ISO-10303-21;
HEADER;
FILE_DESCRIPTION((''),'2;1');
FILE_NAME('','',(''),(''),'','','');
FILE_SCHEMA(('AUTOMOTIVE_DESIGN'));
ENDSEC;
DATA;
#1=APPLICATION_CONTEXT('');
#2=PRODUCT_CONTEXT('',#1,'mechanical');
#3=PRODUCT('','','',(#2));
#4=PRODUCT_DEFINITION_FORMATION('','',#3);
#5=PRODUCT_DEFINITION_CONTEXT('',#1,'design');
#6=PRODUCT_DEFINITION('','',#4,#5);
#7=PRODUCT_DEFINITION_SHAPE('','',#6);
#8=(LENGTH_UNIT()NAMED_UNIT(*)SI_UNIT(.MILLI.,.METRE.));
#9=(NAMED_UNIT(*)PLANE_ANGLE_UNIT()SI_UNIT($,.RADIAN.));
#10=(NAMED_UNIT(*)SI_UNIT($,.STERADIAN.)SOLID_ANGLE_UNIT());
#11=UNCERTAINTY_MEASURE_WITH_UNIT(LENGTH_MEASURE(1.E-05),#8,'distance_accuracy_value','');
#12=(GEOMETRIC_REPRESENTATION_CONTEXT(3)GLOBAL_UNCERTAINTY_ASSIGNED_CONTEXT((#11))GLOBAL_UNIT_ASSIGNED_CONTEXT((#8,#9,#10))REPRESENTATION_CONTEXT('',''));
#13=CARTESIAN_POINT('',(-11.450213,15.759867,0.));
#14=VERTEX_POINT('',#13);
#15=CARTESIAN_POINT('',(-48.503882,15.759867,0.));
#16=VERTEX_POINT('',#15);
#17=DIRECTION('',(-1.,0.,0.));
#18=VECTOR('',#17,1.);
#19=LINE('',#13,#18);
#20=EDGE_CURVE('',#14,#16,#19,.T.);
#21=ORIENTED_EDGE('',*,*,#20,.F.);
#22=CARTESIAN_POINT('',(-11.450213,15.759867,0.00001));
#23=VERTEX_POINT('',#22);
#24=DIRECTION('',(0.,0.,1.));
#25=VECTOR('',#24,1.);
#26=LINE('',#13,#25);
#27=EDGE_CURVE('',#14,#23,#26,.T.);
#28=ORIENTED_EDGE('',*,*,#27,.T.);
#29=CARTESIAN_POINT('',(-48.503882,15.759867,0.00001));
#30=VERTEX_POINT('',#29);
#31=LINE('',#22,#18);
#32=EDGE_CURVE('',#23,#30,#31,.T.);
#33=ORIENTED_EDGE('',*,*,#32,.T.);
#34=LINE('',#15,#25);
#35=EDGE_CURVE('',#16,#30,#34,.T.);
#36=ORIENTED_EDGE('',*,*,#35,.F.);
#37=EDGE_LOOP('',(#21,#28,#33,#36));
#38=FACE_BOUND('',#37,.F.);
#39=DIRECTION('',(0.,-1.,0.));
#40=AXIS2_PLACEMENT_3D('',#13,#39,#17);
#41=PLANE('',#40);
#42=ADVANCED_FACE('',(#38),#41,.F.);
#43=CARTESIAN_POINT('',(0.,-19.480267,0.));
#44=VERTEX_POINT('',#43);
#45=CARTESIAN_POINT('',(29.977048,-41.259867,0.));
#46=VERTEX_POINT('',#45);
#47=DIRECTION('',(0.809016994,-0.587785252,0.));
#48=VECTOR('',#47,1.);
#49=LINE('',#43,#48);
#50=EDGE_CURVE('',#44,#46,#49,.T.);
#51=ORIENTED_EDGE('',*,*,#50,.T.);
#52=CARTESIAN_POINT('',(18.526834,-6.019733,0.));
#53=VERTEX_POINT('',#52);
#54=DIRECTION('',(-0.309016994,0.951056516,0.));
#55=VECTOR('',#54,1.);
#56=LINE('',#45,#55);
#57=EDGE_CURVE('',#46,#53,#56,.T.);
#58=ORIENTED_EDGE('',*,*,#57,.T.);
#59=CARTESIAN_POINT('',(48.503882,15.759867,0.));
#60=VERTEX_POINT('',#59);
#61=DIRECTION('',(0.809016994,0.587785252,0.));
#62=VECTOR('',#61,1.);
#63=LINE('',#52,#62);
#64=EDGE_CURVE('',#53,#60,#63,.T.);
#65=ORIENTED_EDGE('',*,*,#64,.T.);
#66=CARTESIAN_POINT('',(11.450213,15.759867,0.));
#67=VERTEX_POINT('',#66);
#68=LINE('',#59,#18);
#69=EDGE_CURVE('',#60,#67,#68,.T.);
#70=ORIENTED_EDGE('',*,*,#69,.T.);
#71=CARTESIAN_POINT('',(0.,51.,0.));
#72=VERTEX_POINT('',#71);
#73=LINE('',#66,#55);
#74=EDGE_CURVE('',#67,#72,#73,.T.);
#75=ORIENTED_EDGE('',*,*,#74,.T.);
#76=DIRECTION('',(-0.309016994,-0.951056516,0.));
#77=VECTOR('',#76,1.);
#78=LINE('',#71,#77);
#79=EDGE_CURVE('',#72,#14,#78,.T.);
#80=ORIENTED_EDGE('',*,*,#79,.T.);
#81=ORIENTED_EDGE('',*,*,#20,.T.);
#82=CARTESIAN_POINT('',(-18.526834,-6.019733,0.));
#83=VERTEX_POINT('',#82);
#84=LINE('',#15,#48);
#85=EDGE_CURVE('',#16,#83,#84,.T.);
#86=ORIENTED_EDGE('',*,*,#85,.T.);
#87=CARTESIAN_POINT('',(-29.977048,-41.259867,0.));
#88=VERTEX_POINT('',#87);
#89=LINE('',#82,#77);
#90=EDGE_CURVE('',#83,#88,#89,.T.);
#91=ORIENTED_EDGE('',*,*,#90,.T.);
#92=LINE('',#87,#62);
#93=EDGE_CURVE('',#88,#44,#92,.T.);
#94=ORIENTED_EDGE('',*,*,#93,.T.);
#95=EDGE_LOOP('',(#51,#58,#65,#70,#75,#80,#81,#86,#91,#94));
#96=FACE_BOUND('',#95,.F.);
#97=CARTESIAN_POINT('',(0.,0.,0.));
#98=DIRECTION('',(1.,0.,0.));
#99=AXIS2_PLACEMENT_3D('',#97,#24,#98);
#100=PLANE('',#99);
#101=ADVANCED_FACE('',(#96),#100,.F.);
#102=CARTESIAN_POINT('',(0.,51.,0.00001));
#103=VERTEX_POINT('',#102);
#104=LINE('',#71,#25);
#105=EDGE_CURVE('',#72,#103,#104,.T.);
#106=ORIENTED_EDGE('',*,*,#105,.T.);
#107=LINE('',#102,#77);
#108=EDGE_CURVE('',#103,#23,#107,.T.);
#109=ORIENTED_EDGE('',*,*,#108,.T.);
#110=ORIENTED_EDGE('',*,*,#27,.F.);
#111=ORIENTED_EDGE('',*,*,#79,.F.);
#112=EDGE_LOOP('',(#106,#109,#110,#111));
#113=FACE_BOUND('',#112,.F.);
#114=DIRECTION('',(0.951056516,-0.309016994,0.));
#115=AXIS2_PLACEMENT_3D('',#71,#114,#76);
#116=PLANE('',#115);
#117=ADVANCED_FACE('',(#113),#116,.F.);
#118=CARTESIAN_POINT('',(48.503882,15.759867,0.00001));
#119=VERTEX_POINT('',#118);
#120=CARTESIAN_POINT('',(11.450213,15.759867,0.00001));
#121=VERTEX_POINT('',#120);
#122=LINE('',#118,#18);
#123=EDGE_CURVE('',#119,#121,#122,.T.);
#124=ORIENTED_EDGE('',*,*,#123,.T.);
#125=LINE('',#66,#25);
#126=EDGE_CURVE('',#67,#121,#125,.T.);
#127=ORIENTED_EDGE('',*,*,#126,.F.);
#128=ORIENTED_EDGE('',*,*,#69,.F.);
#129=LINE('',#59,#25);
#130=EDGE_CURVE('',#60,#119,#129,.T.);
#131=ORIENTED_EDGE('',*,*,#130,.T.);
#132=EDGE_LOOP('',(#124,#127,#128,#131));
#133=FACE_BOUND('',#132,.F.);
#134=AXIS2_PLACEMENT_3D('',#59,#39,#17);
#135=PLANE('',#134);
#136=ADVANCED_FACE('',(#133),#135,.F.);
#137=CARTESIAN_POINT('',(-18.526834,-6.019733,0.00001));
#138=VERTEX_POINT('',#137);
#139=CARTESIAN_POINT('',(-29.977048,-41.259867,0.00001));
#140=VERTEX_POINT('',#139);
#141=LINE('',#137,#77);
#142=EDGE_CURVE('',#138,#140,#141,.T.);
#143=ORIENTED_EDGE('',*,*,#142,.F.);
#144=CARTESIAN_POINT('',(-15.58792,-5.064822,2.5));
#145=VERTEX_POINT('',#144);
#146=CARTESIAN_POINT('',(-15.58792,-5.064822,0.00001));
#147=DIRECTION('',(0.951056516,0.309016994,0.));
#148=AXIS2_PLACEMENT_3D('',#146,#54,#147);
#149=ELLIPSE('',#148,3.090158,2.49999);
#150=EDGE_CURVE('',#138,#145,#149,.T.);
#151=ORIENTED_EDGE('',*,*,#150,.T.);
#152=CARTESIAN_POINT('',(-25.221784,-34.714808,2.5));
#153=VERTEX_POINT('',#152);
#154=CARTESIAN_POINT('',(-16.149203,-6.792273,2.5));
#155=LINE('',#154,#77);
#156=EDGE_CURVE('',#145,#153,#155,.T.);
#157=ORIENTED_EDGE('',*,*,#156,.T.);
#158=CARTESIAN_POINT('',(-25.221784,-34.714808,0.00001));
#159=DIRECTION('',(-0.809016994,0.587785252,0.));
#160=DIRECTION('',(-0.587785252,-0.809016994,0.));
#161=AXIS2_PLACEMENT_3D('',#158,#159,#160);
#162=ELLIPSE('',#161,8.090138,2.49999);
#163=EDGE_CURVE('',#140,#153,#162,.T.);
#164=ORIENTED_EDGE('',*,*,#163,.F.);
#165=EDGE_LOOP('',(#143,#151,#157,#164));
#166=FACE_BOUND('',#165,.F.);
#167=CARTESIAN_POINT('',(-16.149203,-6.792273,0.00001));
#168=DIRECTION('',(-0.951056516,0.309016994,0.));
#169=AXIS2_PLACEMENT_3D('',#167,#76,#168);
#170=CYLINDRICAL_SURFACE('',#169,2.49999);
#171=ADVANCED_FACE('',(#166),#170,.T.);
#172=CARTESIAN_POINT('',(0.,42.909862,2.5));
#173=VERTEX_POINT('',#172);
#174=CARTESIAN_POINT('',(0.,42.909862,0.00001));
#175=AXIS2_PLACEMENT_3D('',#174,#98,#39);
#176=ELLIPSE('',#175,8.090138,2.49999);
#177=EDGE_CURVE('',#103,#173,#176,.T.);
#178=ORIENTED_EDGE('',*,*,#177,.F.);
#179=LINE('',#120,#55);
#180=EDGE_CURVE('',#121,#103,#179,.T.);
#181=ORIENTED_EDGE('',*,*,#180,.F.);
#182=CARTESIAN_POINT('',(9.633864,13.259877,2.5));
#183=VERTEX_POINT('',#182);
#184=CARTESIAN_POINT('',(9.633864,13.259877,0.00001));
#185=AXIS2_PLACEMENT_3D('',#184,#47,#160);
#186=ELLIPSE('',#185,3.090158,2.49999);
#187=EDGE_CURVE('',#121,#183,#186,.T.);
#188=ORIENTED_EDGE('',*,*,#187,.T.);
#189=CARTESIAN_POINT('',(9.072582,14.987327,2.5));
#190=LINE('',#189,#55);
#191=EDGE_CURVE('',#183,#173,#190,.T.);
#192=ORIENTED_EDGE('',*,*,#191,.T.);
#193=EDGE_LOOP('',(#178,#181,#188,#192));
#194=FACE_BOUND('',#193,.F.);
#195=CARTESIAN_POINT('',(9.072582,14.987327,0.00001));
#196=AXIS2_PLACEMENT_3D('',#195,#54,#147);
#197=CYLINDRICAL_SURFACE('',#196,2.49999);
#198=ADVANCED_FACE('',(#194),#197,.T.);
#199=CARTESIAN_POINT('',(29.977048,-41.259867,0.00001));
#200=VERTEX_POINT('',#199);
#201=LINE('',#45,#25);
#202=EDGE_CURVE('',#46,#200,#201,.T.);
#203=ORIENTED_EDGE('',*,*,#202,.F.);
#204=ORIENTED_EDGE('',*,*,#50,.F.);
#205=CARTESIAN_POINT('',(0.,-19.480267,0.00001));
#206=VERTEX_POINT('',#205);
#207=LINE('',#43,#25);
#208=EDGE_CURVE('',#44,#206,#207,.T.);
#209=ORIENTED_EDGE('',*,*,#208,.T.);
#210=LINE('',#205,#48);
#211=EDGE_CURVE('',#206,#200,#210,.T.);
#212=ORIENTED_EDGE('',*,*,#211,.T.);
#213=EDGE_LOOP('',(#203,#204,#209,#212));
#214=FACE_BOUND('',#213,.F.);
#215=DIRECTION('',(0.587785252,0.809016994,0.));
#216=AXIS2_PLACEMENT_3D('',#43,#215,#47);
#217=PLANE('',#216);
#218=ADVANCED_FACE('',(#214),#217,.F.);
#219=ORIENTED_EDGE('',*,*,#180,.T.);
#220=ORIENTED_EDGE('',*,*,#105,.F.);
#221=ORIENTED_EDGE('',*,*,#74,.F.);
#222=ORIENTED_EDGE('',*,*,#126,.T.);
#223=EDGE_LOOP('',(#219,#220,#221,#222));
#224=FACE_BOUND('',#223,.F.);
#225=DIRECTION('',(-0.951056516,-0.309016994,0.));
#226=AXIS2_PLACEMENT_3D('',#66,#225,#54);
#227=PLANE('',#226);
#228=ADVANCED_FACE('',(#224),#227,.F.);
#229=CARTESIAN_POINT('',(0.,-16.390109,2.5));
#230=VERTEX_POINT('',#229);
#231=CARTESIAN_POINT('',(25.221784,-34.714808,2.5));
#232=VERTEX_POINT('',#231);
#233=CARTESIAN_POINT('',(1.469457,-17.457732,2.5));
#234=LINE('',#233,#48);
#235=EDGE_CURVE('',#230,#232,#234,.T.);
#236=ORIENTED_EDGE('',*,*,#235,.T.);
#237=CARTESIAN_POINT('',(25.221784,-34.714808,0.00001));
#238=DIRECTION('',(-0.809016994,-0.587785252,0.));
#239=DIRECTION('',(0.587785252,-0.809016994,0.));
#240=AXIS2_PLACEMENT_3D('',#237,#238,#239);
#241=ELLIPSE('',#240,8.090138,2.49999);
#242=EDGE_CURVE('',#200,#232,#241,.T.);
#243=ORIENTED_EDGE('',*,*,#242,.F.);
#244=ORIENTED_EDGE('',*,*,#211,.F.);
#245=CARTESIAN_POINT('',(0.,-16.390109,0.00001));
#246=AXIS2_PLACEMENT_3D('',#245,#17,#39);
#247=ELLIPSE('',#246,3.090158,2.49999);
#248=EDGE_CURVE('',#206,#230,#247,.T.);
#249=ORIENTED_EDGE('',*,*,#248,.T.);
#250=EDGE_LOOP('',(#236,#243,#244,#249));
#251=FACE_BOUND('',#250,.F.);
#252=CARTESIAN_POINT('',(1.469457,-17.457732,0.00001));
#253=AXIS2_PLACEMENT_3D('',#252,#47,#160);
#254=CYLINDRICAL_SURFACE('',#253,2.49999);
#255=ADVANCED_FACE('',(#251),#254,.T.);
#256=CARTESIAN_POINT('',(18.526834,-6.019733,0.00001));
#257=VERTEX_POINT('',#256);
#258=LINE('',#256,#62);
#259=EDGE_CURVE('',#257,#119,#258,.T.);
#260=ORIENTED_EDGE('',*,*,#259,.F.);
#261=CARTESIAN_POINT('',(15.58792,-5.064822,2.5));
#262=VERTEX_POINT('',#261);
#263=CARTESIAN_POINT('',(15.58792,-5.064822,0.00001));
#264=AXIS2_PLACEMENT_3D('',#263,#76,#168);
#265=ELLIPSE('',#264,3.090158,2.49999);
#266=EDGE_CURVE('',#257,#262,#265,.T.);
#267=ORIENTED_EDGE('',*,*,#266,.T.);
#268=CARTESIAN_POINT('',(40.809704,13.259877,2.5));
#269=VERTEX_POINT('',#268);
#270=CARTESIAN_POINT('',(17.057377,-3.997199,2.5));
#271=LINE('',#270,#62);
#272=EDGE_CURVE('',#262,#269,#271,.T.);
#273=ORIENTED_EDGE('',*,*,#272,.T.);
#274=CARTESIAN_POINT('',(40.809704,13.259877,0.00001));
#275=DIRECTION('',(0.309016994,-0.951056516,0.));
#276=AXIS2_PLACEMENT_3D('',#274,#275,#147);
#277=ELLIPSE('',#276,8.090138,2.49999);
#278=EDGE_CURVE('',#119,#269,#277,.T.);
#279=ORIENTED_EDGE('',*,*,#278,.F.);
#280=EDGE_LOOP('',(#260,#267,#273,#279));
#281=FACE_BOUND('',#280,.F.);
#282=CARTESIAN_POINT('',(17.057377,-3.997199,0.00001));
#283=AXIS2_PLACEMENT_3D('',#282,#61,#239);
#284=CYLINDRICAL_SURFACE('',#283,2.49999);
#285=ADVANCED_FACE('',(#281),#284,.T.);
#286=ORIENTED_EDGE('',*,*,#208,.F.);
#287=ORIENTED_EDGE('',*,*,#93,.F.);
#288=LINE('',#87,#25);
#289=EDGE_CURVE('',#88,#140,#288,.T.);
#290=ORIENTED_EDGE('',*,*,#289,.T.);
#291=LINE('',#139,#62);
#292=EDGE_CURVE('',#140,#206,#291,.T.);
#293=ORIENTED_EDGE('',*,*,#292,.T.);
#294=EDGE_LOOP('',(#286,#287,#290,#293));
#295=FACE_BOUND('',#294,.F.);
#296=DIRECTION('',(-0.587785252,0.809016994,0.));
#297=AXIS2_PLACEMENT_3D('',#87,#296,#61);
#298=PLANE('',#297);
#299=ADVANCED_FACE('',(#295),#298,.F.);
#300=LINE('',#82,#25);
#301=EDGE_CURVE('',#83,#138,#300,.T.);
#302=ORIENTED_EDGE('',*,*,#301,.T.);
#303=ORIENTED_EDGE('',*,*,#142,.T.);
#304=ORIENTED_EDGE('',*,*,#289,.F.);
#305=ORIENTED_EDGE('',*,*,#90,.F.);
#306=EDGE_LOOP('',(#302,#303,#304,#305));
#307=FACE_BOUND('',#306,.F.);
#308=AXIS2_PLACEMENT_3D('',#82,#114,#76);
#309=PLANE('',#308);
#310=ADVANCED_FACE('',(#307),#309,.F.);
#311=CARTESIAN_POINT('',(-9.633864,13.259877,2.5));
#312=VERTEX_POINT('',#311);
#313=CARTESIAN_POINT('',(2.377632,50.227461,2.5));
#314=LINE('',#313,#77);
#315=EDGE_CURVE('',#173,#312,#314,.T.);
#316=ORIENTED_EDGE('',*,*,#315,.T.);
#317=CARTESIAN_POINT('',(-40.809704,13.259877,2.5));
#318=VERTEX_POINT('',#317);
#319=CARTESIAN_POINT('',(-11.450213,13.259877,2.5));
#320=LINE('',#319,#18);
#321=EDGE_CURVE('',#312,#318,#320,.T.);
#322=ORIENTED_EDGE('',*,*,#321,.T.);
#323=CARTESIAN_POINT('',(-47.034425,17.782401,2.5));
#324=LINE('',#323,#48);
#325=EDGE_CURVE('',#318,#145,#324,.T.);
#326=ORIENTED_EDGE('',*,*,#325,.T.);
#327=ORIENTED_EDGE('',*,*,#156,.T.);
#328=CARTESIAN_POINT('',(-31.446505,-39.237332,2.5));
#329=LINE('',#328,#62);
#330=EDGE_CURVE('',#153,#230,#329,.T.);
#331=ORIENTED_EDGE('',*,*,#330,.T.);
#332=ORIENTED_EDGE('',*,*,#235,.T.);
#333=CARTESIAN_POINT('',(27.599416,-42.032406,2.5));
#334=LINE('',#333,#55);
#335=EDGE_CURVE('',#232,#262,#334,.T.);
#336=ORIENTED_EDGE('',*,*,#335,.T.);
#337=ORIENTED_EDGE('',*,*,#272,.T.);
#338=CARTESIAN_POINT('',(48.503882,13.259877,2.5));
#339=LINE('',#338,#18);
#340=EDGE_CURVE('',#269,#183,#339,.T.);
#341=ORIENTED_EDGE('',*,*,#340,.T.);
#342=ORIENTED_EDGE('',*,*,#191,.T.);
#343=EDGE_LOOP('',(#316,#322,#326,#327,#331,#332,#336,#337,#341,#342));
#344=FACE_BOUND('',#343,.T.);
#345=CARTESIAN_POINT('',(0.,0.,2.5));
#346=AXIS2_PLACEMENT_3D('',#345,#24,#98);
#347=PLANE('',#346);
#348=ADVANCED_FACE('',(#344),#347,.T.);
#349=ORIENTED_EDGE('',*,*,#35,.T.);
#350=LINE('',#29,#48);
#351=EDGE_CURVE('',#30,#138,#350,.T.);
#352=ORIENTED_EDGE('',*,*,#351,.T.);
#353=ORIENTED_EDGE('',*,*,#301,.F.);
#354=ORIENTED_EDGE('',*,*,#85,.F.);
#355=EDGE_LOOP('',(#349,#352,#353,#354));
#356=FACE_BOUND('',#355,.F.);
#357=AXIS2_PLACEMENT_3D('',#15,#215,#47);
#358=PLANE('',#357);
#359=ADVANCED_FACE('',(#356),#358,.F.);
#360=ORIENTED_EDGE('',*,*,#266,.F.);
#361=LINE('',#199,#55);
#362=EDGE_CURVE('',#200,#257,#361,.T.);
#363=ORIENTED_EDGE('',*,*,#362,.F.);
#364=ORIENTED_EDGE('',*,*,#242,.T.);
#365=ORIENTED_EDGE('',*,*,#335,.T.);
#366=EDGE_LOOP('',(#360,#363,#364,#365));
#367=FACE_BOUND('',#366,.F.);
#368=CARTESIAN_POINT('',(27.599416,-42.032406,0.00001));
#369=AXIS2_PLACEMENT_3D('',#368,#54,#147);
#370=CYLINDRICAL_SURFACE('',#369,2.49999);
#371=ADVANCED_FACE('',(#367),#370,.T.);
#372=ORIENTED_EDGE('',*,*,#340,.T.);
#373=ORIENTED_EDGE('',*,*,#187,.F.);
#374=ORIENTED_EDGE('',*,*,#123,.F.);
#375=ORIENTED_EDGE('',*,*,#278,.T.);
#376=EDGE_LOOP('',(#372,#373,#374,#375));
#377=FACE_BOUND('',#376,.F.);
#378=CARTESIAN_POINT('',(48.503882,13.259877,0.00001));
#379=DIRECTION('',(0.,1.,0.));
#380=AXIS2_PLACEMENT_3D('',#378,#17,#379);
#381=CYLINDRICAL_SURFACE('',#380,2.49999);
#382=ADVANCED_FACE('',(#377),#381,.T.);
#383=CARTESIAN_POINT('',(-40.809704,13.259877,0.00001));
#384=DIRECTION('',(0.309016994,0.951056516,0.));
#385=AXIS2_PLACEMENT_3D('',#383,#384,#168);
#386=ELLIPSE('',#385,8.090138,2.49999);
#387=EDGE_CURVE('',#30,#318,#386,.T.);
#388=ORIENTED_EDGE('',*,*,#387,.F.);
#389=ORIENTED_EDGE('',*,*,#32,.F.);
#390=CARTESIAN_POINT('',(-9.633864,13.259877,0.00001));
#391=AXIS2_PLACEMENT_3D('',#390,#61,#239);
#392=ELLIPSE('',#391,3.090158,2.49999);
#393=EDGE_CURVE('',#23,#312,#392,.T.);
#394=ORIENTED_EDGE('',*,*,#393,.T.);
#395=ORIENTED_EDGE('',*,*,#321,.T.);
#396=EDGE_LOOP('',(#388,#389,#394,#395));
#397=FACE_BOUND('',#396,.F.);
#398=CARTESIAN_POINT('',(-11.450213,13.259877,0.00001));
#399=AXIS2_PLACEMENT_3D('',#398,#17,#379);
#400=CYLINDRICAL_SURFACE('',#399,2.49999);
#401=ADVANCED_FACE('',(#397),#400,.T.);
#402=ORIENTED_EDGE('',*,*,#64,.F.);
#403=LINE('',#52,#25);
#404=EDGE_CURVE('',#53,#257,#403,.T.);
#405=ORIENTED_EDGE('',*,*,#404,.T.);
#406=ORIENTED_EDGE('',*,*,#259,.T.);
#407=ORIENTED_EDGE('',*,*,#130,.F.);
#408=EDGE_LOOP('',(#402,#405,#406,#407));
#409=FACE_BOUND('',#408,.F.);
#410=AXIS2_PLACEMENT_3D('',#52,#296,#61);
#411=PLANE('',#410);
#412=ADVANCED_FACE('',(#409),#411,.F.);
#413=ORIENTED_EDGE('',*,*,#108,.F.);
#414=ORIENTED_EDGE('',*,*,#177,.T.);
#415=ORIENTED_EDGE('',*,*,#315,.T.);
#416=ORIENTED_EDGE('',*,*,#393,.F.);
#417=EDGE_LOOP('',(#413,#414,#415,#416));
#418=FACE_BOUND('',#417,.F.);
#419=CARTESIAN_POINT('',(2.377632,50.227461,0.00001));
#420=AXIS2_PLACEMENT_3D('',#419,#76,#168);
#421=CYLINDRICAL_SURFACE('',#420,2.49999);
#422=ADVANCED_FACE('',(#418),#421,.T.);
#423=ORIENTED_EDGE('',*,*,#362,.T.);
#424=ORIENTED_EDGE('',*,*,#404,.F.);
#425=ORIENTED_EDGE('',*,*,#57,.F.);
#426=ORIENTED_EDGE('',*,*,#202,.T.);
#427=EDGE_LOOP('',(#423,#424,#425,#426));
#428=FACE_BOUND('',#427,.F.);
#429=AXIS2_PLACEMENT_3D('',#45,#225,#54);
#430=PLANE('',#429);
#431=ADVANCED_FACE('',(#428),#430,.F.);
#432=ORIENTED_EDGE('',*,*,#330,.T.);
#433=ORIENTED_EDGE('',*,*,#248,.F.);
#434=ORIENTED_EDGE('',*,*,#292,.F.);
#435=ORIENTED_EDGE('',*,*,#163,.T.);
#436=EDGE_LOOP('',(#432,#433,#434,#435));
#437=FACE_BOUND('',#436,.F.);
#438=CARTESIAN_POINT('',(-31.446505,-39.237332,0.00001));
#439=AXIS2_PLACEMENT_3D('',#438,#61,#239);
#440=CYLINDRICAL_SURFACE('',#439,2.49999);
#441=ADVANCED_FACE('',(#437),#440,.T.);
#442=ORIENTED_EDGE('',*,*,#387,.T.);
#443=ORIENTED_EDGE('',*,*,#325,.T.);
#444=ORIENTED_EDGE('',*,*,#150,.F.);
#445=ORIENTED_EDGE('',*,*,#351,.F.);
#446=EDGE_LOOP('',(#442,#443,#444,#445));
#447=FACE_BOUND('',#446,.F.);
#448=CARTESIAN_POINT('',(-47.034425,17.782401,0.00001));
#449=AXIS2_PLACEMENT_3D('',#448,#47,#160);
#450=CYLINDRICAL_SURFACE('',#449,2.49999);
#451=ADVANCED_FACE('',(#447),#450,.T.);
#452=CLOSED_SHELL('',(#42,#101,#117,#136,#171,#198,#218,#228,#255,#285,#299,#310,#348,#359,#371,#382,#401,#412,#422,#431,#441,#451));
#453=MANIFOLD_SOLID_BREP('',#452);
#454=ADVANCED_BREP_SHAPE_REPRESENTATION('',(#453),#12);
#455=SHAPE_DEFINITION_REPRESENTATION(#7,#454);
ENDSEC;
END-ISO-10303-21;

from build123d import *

# Parameters (mm, degrees)
F1_DEPTH = 2.5
F2_R     = 2.49999


# Not quite as in the source:
# - a fillet or chamfer is up to 0.001 mm smaller than in the source, because OpenCascade refuses the exact size


with BuildPart() as f1:
    # F0 (on Top) → F1 (new body)
    with BuildSketch(Plane.XY):
        Polygon((-11.4502134028, 15.7598667131), (-48.5038823311, 15.7598667131), (-18.5268344641, -6.0197334262), (-29.9770478669, -41.2598667131), (0, -19.4802665738), (29.9770478669, -41.2598667131), (18.5268344641, -6.0197334262), (48.5038823311, 15.7598667131), (11.4502134028, 15.7598667131), (0, 51), align=None)
    extrude(amount=F1_DEPTH)

    # F2 (radius 2.5 in the source; OpenCascade refuses exactly that, so slightly less here)
    f2_edges = [f1.edges().sort_by_distance(p)[0] for p in [
        (-5.725107, 33.379933, 2.5),
        (-29.977048, 15.759867, 2.5),
        (-33.515358, 4.870067, 2.5),
        (-24.251941, -23.6398, 2.5),
        (14.988524, -30.370067, 2.5),
        (24.251941, -23.6398, 2.5),
        (33.515358, 4.870067, 2.5),
        (29.977048, 15.759867, 2.5),
        (5.725107, 33.379933, 2.5),
        (-14.988524, -30.370067, 2.5),
    ]]
    fillet(f2_edges, radius=F2_R)


solid = f1.part
